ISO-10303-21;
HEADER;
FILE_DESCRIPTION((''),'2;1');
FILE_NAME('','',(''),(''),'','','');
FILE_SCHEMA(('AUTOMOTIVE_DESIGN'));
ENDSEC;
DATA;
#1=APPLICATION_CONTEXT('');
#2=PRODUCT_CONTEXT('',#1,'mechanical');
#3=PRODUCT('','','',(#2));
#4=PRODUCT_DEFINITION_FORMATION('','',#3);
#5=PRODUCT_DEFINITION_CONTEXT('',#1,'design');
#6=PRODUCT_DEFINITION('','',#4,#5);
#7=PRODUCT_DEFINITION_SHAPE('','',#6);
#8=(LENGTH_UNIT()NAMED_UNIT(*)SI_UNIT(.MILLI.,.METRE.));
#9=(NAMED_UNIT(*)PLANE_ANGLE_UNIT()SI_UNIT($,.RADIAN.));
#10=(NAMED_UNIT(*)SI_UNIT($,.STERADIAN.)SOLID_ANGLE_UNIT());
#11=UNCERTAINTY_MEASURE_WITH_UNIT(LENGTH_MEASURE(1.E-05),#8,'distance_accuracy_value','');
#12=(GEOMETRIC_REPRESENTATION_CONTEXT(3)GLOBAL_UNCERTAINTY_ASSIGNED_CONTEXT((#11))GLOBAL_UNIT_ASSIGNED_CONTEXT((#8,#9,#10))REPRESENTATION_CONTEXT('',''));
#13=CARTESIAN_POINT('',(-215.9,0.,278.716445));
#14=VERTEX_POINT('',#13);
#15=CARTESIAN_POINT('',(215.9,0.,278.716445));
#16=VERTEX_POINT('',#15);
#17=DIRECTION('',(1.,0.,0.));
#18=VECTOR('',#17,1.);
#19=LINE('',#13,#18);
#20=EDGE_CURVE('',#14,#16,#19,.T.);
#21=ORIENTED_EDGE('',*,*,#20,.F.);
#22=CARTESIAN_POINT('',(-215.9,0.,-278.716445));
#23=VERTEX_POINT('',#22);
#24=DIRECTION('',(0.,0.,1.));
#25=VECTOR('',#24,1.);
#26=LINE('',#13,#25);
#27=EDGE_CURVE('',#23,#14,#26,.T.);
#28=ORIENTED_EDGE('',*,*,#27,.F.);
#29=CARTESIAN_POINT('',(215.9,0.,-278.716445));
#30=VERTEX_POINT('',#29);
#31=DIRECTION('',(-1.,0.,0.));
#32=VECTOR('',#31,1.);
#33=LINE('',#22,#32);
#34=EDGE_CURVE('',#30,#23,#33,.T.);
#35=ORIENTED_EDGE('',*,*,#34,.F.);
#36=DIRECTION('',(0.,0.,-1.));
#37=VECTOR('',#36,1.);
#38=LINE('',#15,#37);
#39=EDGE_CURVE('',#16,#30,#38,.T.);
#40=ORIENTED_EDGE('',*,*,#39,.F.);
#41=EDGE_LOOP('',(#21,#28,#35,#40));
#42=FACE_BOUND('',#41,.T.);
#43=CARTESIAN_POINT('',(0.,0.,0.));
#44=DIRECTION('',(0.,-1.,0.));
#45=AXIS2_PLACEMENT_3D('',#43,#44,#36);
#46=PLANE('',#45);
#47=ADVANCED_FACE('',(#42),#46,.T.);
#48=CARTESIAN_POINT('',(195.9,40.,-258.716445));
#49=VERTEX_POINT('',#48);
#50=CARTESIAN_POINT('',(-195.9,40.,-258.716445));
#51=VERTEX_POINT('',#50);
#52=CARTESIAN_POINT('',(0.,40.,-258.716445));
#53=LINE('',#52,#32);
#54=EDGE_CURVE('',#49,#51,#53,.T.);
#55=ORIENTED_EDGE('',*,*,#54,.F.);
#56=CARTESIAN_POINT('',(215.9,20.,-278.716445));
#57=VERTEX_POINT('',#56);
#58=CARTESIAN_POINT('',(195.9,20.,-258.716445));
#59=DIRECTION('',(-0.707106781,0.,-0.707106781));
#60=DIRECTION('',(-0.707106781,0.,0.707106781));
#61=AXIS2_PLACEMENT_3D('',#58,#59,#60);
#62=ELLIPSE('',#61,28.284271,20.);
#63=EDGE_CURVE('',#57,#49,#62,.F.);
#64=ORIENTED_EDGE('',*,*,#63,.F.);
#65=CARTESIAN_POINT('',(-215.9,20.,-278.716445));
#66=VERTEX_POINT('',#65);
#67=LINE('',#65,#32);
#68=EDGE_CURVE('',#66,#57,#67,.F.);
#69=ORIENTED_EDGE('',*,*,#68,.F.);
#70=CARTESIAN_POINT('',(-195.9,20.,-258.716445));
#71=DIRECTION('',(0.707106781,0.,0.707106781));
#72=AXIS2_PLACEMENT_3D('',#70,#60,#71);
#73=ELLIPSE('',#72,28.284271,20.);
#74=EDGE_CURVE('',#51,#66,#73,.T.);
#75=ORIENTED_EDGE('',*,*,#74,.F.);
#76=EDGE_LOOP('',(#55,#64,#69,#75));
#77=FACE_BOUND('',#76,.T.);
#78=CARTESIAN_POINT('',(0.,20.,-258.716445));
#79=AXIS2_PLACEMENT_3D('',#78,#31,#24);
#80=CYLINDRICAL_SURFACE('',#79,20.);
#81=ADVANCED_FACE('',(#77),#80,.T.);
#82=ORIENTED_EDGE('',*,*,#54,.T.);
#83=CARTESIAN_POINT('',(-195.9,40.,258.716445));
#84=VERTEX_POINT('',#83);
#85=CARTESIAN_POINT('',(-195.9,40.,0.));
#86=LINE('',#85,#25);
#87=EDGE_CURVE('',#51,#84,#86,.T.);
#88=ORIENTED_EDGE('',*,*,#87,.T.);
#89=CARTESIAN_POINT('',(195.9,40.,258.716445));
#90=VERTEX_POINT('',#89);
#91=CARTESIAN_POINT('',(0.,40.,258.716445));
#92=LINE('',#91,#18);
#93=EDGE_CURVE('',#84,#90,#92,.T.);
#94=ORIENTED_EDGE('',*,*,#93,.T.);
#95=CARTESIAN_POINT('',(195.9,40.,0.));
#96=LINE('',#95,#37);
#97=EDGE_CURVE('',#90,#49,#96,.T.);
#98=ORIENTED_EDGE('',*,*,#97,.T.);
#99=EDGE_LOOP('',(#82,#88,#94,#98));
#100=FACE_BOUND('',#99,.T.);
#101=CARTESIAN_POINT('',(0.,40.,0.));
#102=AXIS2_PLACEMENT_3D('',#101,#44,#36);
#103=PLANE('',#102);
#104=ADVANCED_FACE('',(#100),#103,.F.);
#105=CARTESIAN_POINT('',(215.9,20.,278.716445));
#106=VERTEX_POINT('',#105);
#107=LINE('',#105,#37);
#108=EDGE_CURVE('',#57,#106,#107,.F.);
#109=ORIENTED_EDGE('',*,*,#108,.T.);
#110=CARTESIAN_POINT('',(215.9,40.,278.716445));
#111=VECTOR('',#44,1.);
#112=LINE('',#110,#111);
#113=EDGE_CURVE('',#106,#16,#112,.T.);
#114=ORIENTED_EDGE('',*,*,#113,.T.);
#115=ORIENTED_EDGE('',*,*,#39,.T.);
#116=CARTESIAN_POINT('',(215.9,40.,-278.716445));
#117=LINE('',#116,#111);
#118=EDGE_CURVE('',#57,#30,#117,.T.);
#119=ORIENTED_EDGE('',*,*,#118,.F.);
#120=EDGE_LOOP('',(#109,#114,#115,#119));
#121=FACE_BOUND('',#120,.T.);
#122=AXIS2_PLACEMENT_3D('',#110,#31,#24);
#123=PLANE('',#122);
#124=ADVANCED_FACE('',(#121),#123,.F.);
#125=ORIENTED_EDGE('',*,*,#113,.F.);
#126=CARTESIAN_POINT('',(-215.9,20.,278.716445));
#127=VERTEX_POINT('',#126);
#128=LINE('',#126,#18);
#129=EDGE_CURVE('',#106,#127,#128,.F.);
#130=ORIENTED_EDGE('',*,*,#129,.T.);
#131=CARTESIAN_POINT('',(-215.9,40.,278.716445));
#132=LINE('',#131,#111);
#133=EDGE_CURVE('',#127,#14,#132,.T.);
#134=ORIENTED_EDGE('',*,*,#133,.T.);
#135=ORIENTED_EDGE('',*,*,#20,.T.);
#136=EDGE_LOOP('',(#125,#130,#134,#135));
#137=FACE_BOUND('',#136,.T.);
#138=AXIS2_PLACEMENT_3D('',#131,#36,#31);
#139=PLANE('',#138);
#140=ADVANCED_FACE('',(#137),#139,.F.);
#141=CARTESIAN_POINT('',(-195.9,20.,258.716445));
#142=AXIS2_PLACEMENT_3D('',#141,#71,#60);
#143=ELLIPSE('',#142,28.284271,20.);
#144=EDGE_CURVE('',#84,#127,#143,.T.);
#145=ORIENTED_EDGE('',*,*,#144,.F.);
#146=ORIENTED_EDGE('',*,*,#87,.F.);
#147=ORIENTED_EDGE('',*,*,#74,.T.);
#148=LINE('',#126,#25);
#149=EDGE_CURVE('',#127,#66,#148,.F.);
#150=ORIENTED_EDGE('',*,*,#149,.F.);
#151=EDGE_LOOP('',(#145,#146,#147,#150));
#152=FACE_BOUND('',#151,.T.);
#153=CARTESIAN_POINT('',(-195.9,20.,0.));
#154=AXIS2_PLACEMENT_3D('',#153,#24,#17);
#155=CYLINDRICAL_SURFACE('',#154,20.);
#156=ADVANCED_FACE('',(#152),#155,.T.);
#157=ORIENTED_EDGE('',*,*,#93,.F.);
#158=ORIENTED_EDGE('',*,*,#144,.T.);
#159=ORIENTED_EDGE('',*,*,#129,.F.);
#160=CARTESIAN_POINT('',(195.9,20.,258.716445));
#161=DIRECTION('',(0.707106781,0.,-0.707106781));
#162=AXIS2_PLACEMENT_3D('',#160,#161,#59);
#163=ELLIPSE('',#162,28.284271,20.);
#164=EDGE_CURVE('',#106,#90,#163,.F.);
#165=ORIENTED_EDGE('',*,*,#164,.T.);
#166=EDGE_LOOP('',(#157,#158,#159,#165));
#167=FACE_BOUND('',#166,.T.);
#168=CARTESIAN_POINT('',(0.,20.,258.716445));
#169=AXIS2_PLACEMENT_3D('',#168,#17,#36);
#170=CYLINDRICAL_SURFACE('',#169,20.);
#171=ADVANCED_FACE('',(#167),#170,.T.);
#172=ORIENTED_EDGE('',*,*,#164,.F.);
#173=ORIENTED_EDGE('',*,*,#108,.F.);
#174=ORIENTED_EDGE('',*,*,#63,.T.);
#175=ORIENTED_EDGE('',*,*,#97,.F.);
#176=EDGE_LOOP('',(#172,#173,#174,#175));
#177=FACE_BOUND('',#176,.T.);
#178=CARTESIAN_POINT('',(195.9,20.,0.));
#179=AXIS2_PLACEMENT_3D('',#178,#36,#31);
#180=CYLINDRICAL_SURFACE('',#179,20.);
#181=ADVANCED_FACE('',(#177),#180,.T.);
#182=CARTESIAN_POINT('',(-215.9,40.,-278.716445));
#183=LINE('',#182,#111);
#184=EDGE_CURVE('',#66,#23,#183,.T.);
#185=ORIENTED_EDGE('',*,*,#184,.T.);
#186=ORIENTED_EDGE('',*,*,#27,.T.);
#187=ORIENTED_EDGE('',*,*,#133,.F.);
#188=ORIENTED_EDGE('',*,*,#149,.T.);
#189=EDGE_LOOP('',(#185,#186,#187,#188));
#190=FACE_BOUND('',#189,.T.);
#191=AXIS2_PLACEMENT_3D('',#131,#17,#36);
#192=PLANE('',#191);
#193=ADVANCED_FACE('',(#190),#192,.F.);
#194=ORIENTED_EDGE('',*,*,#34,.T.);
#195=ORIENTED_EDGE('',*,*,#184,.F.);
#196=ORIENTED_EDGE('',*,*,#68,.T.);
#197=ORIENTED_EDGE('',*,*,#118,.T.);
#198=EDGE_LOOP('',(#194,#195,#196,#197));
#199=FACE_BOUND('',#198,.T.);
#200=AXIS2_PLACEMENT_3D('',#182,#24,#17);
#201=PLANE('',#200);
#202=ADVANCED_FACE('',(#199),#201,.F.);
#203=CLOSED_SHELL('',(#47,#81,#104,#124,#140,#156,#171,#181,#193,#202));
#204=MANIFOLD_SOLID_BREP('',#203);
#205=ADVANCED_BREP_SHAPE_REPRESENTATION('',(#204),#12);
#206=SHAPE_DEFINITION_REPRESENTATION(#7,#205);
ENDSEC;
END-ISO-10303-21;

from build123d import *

# Parameters (mm, degrees)
SKETCH1_W           = 431.8
SKETCH1_H           = 557.4328891
BOSS_EXTRUDE1_DEPTH = 40
FILLET1_START       = -215.9
FILLET1_DEPTH       = 431.8
FILLET1_START_2     = -280
FILLET1_2_DEPTH     = 560


with BuildPart() as part:
    # Sketch1 → Boss-Extrude1 (new body)
    with BuildSketch(Plane(origin=(0, 0, 0), x_dir=(1, 0, 0), z_dir=(0, 1, 0))):
        Rectangle(SKETCH1_W, SKETCH1_H)
    extrude(amount=BOSS_EXTRUDE1_DEPTH)

    # Fillet1: read off the stored shape, not the designer's step
    # Fillet1 outline → Fillet1 (cut)
    with BuildSketch(Plane.YZ.offset(FILLET1_START)):
        with BuildLine():
            Line((40, -278.71644455), (40, -258.71644455))
            ThreePointArc((40, -258.71644455), (34.142135624, -272.858580174), (20, -278.71644455))
            Line((20, -278.71644455), (40, -278.71644455))
        make_face()
        with BuildLine():
            ThreePointArc((20, 278.71644455), (34.142135624, 272.858580174), (40, 258.71644455))
            Line((40, 258.71644455), (40, 278.71644455))
            Line((40, 278.71644455), (20, 278.71644455))
        make_face()
    extrude(amount=FILLET1_DEPTH, mode=Mode.SUBTRACT)

    # Fillet1 2 outline → Fillet1 2 (cut)
    with BuildSketch(Plane.XY.offset(FILLET1_START_2)):
        with BuildLine():
            Line((215.9, 40), (195.9, 40))
            ThreePointArc((195.9, 40), (210.042135624, 34.142135624), (215.9, 20))
            Line((215.9, 20), (215.9, 40))
        make_face()
        with BuildLine():
            ThreePointArc((-215.9, 20), (-210.042135624, 34.142135624), (-195.9, 40))
            Line((-195.9, 40), (-215.9, 40))
            Line((-215.9, 40), (-215.9, 20))
        make_face()
    extrude(amount=FILLET1_2_DEPTH, mode=Mode.SUBTRACT)


solid = part.part
